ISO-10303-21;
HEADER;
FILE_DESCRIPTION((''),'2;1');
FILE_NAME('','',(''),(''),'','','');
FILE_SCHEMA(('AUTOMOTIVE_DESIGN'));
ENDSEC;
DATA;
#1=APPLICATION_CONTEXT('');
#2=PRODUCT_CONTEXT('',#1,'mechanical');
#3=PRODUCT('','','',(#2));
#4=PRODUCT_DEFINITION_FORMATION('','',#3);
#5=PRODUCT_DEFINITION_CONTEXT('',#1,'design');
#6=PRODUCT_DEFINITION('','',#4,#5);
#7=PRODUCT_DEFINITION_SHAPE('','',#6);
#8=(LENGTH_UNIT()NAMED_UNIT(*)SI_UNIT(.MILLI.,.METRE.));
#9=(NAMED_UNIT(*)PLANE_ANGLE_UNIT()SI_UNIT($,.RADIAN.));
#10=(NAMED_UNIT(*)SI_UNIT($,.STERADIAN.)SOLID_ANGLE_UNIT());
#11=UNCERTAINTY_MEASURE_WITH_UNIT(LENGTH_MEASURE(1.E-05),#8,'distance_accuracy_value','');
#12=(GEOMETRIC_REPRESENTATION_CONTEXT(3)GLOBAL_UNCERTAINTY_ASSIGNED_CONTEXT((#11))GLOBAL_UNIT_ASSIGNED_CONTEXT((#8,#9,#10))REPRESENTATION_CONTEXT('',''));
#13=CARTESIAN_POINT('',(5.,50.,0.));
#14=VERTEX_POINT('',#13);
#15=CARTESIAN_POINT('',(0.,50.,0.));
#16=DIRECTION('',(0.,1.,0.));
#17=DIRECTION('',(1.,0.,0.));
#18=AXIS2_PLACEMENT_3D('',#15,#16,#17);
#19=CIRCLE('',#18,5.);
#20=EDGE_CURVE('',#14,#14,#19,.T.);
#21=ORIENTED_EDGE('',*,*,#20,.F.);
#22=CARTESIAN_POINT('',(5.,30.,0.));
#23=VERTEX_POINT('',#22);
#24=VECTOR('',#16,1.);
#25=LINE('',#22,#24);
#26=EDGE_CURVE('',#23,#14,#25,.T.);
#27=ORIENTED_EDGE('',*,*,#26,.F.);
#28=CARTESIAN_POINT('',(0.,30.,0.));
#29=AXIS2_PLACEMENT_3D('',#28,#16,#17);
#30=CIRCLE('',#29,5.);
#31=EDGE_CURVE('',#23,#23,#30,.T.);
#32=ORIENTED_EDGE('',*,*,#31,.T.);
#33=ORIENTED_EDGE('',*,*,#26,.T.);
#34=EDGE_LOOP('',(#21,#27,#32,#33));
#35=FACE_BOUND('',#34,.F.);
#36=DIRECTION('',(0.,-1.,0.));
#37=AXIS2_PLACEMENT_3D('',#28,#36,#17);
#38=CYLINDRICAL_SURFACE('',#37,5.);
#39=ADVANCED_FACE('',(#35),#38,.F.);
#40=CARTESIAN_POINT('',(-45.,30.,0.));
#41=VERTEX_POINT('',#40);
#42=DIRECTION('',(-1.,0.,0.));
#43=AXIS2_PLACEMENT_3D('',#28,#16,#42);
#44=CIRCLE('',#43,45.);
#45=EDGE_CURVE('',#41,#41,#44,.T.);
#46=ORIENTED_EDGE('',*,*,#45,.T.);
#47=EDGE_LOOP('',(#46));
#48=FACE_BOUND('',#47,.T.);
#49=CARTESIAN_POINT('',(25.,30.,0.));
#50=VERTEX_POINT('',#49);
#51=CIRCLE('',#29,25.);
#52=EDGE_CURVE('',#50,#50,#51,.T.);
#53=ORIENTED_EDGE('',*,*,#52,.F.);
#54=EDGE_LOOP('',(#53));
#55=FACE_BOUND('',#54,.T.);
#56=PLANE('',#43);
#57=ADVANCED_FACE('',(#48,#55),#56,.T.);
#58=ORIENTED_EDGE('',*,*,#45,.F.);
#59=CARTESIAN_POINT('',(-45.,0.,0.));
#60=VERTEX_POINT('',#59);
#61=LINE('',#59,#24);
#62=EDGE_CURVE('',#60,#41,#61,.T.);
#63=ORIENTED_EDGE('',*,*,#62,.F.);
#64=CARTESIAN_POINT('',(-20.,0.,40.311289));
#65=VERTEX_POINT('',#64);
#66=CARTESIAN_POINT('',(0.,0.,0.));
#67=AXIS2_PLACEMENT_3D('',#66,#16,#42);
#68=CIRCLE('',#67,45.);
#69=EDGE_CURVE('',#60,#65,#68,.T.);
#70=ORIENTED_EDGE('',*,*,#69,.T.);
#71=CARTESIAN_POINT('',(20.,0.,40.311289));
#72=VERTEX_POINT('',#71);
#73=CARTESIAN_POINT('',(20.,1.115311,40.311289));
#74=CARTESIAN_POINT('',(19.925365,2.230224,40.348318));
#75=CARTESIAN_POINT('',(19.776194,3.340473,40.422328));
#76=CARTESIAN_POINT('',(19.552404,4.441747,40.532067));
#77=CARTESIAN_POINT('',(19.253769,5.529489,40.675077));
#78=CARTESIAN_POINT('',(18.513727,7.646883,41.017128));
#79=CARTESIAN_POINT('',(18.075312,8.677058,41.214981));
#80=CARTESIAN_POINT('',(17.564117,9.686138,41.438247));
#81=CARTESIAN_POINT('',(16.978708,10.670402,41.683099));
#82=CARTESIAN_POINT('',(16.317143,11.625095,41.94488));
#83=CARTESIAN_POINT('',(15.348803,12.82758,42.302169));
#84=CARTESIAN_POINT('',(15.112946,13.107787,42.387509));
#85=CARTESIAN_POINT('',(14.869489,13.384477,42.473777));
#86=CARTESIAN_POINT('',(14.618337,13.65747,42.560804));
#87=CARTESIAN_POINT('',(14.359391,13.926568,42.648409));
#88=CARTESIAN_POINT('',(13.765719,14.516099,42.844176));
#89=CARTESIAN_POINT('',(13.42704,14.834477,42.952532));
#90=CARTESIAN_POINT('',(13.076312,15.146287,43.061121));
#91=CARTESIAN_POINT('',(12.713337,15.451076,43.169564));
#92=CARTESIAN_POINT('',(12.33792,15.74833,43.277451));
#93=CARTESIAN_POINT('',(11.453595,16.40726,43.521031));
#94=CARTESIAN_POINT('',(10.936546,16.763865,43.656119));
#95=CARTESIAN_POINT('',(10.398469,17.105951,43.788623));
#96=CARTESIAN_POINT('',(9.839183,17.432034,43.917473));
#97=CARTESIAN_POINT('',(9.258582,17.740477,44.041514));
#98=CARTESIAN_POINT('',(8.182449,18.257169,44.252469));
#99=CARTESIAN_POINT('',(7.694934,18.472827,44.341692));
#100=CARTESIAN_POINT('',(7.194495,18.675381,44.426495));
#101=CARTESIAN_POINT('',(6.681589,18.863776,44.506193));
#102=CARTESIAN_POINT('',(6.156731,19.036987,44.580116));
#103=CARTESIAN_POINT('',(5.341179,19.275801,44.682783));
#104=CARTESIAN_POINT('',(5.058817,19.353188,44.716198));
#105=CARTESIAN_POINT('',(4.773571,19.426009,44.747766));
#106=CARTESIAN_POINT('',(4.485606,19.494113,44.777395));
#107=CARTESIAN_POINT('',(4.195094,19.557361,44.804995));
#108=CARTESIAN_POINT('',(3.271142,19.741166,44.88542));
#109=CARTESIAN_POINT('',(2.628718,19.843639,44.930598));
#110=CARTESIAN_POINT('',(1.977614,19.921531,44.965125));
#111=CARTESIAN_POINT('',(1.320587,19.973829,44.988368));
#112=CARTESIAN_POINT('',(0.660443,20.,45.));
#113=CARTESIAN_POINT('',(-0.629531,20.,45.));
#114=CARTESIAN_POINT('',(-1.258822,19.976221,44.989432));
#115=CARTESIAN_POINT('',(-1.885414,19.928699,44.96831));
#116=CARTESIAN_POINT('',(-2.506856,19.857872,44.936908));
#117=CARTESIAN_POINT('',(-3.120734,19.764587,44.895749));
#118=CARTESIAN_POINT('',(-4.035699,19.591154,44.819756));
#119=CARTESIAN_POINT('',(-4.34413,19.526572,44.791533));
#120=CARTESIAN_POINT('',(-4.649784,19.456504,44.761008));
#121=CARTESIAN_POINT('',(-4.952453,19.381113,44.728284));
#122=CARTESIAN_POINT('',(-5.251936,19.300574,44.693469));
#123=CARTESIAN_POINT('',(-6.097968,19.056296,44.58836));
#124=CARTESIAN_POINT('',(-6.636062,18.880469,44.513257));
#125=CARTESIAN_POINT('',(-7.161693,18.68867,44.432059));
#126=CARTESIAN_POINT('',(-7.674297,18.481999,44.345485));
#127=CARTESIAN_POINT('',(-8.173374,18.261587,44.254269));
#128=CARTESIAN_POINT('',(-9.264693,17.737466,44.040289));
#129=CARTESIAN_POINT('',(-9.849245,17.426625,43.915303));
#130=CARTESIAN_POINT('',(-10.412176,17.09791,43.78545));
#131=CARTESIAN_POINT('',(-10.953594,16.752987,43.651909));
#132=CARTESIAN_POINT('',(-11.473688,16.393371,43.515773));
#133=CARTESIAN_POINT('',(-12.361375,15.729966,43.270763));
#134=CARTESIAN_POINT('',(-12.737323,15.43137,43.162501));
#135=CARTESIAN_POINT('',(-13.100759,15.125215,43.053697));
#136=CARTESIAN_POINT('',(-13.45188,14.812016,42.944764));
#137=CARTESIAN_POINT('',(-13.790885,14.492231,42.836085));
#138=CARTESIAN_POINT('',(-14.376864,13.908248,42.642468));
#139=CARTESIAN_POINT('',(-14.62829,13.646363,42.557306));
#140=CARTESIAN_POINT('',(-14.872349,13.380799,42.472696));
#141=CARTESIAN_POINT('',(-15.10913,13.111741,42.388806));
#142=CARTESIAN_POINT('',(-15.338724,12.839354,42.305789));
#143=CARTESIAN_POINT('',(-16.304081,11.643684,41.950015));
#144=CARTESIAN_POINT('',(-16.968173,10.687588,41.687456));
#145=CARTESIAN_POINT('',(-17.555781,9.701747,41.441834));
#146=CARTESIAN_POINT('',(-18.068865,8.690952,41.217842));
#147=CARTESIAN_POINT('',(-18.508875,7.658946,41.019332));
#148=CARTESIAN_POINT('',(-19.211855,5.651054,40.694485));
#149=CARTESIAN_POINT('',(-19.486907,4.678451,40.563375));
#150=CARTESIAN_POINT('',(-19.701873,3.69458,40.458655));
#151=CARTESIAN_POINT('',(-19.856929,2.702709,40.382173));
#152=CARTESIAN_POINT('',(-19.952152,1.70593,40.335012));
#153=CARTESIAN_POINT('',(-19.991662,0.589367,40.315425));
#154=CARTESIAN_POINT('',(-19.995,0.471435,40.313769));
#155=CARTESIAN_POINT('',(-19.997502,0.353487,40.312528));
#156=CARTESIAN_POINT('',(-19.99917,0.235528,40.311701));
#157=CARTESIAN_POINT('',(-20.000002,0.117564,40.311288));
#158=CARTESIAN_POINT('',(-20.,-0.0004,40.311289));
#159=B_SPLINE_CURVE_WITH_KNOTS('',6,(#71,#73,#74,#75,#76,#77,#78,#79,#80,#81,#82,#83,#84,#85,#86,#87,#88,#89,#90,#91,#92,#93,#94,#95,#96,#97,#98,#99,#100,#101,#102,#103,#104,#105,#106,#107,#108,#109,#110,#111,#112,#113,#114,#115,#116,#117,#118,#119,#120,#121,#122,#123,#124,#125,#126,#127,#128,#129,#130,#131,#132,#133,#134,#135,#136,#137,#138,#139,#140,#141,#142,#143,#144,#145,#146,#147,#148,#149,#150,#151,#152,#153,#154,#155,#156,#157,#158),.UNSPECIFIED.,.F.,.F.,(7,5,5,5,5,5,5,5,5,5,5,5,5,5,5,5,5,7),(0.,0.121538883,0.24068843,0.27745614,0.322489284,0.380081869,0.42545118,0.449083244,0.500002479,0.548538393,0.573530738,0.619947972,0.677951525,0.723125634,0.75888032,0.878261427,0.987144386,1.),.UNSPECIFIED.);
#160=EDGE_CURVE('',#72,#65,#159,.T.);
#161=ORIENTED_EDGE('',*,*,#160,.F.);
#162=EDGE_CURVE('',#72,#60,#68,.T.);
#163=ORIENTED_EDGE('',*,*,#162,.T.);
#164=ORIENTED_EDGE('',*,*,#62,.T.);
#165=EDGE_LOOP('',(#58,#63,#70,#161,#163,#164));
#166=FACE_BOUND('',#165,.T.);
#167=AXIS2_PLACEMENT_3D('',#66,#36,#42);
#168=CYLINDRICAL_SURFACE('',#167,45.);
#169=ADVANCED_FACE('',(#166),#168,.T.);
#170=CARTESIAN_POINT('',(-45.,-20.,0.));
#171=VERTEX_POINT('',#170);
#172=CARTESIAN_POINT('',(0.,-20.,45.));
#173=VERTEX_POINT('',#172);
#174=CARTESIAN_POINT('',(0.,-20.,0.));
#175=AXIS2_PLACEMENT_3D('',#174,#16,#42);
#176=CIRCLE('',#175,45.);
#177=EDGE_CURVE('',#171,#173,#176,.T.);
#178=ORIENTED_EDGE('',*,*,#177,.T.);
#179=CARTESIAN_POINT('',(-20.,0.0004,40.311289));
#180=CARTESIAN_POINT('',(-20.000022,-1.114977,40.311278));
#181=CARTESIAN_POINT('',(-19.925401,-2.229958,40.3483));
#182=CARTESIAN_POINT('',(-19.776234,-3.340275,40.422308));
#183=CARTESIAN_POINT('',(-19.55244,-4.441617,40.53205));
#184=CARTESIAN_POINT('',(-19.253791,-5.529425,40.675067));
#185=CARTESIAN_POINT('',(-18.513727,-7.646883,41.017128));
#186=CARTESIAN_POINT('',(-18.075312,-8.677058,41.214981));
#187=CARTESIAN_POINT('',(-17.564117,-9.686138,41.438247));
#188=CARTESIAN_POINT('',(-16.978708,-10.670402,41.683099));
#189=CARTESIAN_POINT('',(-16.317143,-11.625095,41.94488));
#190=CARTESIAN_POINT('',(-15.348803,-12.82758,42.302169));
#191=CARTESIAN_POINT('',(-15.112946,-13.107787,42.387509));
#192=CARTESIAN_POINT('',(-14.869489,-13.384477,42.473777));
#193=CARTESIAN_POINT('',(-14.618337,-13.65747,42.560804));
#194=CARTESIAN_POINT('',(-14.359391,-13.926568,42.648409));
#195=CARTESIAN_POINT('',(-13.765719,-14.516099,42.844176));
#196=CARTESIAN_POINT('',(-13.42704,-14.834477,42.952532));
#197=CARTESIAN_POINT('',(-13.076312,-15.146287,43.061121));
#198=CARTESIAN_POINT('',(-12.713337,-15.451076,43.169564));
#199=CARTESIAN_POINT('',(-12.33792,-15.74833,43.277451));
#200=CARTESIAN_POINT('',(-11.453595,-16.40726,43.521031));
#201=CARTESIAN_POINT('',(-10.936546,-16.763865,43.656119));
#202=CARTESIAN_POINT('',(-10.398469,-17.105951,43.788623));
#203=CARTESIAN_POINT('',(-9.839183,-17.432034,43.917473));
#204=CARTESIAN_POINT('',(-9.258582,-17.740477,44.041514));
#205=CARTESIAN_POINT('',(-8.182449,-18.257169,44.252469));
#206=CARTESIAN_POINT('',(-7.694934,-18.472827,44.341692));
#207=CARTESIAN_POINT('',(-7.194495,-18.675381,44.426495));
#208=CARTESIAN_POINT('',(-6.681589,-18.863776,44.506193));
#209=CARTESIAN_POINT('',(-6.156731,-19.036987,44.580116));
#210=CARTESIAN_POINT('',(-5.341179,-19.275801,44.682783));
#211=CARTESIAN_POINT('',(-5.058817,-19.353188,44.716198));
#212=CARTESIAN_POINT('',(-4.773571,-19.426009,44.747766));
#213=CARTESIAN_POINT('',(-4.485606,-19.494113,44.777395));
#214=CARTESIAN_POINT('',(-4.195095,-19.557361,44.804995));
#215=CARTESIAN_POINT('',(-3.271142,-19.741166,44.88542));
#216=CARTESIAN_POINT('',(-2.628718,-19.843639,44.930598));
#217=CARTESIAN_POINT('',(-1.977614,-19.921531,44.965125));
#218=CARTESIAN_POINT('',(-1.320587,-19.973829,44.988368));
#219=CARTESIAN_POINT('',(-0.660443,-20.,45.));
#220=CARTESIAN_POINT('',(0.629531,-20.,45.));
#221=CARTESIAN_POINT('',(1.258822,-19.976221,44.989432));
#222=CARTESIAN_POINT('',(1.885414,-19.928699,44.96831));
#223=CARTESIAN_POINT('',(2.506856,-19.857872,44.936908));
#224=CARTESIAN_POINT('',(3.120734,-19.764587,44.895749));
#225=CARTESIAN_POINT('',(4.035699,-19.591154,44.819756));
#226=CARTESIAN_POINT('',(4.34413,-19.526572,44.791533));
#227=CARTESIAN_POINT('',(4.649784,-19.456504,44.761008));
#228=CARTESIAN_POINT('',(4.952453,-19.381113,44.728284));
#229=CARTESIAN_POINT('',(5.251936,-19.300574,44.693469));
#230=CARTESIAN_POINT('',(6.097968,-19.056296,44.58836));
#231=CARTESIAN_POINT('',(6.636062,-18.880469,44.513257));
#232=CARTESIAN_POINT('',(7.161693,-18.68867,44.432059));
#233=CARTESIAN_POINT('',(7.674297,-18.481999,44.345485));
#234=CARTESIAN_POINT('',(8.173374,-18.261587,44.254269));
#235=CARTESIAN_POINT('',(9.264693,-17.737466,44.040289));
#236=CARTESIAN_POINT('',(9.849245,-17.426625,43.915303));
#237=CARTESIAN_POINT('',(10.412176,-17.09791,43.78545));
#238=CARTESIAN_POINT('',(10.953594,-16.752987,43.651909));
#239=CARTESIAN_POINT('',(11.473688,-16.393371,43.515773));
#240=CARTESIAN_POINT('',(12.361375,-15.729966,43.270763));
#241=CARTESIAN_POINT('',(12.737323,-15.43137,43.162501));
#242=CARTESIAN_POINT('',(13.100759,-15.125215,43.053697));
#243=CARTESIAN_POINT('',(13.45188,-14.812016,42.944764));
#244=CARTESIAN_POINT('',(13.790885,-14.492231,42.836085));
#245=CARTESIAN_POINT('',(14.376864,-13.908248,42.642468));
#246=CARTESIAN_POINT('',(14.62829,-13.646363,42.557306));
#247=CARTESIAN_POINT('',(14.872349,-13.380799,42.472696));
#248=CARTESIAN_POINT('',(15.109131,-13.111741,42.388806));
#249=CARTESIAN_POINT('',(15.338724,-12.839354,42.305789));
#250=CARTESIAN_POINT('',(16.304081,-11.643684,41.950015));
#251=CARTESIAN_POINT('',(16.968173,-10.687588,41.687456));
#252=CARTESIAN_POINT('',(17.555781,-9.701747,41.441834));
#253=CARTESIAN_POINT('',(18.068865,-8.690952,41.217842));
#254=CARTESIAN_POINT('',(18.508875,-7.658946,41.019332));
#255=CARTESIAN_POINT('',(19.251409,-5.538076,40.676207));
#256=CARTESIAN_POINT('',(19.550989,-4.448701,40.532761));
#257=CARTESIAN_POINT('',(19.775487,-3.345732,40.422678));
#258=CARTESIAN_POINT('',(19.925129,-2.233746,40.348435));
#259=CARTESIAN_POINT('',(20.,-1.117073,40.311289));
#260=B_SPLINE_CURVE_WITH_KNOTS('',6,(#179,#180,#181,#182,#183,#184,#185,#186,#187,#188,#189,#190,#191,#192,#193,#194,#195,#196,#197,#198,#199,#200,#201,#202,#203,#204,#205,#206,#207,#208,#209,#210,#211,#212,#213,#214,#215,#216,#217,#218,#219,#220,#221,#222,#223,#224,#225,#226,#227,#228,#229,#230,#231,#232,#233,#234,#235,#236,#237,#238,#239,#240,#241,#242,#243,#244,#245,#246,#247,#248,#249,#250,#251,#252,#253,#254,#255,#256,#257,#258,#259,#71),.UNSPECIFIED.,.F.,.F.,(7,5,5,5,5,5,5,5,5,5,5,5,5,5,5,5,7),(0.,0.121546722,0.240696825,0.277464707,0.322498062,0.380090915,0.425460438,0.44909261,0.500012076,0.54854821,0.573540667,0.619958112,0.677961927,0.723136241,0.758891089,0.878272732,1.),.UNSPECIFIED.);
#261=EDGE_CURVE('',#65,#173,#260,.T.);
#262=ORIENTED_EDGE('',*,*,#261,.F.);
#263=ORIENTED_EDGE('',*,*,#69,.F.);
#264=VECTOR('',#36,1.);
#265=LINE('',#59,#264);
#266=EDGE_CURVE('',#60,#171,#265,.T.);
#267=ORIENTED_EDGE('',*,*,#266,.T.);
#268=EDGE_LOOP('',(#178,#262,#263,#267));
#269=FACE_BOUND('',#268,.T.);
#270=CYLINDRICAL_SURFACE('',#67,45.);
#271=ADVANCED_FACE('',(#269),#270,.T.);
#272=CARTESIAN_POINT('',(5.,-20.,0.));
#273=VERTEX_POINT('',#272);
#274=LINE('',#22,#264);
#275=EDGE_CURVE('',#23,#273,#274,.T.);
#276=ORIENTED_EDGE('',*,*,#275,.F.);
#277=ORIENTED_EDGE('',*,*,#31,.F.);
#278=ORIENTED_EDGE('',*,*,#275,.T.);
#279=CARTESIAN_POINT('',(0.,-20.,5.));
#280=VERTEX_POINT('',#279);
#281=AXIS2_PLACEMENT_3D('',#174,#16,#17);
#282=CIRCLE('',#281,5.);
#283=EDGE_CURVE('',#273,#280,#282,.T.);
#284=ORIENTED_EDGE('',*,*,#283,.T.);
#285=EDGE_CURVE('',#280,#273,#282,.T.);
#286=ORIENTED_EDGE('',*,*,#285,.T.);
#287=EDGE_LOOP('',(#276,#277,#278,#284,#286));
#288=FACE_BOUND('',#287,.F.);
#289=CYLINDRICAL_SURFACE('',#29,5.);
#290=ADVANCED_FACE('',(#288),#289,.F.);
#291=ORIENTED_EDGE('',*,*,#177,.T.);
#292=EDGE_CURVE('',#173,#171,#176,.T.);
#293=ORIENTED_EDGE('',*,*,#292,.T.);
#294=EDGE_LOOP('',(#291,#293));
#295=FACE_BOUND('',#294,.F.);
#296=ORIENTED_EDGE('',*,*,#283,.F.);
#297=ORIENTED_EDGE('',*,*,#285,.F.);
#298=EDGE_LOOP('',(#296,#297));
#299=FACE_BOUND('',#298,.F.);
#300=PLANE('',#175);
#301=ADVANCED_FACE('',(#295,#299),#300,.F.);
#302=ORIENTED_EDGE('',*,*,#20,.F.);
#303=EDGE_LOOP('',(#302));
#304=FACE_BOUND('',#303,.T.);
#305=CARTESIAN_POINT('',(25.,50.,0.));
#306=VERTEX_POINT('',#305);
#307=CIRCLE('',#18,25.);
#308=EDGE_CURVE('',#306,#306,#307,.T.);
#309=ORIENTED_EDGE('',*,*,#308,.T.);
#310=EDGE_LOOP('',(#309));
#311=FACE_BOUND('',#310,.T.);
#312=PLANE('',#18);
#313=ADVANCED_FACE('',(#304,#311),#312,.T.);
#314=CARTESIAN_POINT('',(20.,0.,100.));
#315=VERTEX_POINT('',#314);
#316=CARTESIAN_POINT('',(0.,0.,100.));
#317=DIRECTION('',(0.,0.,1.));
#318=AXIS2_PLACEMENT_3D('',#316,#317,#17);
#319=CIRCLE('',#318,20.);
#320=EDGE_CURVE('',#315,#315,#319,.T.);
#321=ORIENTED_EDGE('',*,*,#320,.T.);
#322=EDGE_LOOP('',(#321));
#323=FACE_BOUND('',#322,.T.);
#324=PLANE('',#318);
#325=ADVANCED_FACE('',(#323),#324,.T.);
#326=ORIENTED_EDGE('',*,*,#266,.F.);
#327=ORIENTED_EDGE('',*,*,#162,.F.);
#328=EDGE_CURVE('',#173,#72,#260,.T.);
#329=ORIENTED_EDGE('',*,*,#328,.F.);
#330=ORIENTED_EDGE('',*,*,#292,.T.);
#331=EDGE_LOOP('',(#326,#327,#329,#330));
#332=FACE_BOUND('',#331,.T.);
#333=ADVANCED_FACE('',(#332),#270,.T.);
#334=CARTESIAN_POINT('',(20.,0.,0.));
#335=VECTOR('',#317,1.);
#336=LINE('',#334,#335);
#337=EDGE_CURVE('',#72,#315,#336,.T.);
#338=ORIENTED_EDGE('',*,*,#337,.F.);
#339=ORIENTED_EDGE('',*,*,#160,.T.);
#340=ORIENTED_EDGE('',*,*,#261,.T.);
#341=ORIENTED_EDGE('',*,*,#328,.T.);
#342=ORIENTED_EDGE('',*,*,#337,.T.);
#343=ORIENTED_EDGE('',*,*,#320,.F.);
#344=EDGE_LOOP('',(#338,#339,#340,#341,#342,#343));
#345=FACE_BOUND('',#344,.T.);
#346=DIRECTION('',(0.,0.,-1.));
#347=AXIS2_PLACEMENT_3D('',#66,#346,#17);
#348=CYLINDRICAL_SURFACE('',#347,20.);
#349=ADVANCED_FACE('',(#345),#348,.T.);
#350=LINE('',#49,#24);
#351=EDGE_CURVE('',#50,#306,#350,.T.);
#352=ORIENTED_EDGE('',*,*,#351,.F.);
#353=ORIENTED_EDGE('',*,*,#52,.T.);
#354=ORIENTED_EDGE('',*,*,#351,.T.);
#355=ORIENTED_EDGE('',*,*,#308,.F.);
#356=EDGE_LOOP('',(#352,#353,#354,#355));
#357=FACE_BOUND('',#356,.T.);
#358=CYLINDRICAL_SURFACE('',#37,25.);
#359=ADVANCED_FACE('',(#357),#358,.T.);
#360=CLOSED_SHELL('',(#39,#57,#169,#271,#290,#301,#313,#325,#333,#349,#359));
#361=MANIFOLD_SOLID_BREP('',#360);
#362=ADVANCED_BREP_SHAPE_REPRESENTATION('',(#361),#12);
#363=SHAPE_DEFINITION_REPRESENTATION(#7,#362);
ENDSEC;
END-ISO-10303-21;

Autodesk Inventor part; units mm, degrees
ref_plane "YZ Plane" through (0, 0, 0) normal (1, 0, 0) x (0, 1, 0)
ref_plane "XZ Plane" through (0, 0, 0) normal (0, 1, 0) x (-1, 0, 0)
ref_plane "XY Plane" through (0, 0, 0) normal (0, 0, 1) x (1, 0, 0)
sketch "Sketch1" plane through (0, 0, 0) normal (0, 0, 1) x (1, 0, 0)
  circle A0 centre (0, 0) radius 20
  dimension "d0" = 40
extrude "Extrusion1" add sketch "Sketch1" along normal blind 100
sketch "Sketch2" plane through (0, 0, 0) normal (0, 1, 0) x (-1, 0, 0)
  line L0 (20, 0) -> (-20, 0) projected
  circle A0 centre (0, 0) radius 45
  dimension "d3" = 90
extrude "Extrusion2" add sketch "Sketch2" along normal blind 30 and the other way blind 20
sketch "Sketch4" plane through (0, 30, 0) normal (0, 1, 0) x (1, 0, 0)
  circle A0 centre (0, 0) radius 5
  dimension "d9" = 10
extrude "Extrusion4" cut sketch "Sketch4" along normal through all both and the other way through all
sketch "Sketch6" plane through (0, 30, 0) normal (0, 1, 0) x (1, 0, 0)
  circle A0 centre (0, 0) radius 5 projected
  circle A1 centre (0, 0) radius 25
  circle A2 centre (0, 0) radius 15
  dimension "d15" = 50
  dimension "d16" = 30
extrude "Extrusion6" add sketch "Sketch6" along normal blind 20 contours A1 | A2
properties part number "End Link 2"
